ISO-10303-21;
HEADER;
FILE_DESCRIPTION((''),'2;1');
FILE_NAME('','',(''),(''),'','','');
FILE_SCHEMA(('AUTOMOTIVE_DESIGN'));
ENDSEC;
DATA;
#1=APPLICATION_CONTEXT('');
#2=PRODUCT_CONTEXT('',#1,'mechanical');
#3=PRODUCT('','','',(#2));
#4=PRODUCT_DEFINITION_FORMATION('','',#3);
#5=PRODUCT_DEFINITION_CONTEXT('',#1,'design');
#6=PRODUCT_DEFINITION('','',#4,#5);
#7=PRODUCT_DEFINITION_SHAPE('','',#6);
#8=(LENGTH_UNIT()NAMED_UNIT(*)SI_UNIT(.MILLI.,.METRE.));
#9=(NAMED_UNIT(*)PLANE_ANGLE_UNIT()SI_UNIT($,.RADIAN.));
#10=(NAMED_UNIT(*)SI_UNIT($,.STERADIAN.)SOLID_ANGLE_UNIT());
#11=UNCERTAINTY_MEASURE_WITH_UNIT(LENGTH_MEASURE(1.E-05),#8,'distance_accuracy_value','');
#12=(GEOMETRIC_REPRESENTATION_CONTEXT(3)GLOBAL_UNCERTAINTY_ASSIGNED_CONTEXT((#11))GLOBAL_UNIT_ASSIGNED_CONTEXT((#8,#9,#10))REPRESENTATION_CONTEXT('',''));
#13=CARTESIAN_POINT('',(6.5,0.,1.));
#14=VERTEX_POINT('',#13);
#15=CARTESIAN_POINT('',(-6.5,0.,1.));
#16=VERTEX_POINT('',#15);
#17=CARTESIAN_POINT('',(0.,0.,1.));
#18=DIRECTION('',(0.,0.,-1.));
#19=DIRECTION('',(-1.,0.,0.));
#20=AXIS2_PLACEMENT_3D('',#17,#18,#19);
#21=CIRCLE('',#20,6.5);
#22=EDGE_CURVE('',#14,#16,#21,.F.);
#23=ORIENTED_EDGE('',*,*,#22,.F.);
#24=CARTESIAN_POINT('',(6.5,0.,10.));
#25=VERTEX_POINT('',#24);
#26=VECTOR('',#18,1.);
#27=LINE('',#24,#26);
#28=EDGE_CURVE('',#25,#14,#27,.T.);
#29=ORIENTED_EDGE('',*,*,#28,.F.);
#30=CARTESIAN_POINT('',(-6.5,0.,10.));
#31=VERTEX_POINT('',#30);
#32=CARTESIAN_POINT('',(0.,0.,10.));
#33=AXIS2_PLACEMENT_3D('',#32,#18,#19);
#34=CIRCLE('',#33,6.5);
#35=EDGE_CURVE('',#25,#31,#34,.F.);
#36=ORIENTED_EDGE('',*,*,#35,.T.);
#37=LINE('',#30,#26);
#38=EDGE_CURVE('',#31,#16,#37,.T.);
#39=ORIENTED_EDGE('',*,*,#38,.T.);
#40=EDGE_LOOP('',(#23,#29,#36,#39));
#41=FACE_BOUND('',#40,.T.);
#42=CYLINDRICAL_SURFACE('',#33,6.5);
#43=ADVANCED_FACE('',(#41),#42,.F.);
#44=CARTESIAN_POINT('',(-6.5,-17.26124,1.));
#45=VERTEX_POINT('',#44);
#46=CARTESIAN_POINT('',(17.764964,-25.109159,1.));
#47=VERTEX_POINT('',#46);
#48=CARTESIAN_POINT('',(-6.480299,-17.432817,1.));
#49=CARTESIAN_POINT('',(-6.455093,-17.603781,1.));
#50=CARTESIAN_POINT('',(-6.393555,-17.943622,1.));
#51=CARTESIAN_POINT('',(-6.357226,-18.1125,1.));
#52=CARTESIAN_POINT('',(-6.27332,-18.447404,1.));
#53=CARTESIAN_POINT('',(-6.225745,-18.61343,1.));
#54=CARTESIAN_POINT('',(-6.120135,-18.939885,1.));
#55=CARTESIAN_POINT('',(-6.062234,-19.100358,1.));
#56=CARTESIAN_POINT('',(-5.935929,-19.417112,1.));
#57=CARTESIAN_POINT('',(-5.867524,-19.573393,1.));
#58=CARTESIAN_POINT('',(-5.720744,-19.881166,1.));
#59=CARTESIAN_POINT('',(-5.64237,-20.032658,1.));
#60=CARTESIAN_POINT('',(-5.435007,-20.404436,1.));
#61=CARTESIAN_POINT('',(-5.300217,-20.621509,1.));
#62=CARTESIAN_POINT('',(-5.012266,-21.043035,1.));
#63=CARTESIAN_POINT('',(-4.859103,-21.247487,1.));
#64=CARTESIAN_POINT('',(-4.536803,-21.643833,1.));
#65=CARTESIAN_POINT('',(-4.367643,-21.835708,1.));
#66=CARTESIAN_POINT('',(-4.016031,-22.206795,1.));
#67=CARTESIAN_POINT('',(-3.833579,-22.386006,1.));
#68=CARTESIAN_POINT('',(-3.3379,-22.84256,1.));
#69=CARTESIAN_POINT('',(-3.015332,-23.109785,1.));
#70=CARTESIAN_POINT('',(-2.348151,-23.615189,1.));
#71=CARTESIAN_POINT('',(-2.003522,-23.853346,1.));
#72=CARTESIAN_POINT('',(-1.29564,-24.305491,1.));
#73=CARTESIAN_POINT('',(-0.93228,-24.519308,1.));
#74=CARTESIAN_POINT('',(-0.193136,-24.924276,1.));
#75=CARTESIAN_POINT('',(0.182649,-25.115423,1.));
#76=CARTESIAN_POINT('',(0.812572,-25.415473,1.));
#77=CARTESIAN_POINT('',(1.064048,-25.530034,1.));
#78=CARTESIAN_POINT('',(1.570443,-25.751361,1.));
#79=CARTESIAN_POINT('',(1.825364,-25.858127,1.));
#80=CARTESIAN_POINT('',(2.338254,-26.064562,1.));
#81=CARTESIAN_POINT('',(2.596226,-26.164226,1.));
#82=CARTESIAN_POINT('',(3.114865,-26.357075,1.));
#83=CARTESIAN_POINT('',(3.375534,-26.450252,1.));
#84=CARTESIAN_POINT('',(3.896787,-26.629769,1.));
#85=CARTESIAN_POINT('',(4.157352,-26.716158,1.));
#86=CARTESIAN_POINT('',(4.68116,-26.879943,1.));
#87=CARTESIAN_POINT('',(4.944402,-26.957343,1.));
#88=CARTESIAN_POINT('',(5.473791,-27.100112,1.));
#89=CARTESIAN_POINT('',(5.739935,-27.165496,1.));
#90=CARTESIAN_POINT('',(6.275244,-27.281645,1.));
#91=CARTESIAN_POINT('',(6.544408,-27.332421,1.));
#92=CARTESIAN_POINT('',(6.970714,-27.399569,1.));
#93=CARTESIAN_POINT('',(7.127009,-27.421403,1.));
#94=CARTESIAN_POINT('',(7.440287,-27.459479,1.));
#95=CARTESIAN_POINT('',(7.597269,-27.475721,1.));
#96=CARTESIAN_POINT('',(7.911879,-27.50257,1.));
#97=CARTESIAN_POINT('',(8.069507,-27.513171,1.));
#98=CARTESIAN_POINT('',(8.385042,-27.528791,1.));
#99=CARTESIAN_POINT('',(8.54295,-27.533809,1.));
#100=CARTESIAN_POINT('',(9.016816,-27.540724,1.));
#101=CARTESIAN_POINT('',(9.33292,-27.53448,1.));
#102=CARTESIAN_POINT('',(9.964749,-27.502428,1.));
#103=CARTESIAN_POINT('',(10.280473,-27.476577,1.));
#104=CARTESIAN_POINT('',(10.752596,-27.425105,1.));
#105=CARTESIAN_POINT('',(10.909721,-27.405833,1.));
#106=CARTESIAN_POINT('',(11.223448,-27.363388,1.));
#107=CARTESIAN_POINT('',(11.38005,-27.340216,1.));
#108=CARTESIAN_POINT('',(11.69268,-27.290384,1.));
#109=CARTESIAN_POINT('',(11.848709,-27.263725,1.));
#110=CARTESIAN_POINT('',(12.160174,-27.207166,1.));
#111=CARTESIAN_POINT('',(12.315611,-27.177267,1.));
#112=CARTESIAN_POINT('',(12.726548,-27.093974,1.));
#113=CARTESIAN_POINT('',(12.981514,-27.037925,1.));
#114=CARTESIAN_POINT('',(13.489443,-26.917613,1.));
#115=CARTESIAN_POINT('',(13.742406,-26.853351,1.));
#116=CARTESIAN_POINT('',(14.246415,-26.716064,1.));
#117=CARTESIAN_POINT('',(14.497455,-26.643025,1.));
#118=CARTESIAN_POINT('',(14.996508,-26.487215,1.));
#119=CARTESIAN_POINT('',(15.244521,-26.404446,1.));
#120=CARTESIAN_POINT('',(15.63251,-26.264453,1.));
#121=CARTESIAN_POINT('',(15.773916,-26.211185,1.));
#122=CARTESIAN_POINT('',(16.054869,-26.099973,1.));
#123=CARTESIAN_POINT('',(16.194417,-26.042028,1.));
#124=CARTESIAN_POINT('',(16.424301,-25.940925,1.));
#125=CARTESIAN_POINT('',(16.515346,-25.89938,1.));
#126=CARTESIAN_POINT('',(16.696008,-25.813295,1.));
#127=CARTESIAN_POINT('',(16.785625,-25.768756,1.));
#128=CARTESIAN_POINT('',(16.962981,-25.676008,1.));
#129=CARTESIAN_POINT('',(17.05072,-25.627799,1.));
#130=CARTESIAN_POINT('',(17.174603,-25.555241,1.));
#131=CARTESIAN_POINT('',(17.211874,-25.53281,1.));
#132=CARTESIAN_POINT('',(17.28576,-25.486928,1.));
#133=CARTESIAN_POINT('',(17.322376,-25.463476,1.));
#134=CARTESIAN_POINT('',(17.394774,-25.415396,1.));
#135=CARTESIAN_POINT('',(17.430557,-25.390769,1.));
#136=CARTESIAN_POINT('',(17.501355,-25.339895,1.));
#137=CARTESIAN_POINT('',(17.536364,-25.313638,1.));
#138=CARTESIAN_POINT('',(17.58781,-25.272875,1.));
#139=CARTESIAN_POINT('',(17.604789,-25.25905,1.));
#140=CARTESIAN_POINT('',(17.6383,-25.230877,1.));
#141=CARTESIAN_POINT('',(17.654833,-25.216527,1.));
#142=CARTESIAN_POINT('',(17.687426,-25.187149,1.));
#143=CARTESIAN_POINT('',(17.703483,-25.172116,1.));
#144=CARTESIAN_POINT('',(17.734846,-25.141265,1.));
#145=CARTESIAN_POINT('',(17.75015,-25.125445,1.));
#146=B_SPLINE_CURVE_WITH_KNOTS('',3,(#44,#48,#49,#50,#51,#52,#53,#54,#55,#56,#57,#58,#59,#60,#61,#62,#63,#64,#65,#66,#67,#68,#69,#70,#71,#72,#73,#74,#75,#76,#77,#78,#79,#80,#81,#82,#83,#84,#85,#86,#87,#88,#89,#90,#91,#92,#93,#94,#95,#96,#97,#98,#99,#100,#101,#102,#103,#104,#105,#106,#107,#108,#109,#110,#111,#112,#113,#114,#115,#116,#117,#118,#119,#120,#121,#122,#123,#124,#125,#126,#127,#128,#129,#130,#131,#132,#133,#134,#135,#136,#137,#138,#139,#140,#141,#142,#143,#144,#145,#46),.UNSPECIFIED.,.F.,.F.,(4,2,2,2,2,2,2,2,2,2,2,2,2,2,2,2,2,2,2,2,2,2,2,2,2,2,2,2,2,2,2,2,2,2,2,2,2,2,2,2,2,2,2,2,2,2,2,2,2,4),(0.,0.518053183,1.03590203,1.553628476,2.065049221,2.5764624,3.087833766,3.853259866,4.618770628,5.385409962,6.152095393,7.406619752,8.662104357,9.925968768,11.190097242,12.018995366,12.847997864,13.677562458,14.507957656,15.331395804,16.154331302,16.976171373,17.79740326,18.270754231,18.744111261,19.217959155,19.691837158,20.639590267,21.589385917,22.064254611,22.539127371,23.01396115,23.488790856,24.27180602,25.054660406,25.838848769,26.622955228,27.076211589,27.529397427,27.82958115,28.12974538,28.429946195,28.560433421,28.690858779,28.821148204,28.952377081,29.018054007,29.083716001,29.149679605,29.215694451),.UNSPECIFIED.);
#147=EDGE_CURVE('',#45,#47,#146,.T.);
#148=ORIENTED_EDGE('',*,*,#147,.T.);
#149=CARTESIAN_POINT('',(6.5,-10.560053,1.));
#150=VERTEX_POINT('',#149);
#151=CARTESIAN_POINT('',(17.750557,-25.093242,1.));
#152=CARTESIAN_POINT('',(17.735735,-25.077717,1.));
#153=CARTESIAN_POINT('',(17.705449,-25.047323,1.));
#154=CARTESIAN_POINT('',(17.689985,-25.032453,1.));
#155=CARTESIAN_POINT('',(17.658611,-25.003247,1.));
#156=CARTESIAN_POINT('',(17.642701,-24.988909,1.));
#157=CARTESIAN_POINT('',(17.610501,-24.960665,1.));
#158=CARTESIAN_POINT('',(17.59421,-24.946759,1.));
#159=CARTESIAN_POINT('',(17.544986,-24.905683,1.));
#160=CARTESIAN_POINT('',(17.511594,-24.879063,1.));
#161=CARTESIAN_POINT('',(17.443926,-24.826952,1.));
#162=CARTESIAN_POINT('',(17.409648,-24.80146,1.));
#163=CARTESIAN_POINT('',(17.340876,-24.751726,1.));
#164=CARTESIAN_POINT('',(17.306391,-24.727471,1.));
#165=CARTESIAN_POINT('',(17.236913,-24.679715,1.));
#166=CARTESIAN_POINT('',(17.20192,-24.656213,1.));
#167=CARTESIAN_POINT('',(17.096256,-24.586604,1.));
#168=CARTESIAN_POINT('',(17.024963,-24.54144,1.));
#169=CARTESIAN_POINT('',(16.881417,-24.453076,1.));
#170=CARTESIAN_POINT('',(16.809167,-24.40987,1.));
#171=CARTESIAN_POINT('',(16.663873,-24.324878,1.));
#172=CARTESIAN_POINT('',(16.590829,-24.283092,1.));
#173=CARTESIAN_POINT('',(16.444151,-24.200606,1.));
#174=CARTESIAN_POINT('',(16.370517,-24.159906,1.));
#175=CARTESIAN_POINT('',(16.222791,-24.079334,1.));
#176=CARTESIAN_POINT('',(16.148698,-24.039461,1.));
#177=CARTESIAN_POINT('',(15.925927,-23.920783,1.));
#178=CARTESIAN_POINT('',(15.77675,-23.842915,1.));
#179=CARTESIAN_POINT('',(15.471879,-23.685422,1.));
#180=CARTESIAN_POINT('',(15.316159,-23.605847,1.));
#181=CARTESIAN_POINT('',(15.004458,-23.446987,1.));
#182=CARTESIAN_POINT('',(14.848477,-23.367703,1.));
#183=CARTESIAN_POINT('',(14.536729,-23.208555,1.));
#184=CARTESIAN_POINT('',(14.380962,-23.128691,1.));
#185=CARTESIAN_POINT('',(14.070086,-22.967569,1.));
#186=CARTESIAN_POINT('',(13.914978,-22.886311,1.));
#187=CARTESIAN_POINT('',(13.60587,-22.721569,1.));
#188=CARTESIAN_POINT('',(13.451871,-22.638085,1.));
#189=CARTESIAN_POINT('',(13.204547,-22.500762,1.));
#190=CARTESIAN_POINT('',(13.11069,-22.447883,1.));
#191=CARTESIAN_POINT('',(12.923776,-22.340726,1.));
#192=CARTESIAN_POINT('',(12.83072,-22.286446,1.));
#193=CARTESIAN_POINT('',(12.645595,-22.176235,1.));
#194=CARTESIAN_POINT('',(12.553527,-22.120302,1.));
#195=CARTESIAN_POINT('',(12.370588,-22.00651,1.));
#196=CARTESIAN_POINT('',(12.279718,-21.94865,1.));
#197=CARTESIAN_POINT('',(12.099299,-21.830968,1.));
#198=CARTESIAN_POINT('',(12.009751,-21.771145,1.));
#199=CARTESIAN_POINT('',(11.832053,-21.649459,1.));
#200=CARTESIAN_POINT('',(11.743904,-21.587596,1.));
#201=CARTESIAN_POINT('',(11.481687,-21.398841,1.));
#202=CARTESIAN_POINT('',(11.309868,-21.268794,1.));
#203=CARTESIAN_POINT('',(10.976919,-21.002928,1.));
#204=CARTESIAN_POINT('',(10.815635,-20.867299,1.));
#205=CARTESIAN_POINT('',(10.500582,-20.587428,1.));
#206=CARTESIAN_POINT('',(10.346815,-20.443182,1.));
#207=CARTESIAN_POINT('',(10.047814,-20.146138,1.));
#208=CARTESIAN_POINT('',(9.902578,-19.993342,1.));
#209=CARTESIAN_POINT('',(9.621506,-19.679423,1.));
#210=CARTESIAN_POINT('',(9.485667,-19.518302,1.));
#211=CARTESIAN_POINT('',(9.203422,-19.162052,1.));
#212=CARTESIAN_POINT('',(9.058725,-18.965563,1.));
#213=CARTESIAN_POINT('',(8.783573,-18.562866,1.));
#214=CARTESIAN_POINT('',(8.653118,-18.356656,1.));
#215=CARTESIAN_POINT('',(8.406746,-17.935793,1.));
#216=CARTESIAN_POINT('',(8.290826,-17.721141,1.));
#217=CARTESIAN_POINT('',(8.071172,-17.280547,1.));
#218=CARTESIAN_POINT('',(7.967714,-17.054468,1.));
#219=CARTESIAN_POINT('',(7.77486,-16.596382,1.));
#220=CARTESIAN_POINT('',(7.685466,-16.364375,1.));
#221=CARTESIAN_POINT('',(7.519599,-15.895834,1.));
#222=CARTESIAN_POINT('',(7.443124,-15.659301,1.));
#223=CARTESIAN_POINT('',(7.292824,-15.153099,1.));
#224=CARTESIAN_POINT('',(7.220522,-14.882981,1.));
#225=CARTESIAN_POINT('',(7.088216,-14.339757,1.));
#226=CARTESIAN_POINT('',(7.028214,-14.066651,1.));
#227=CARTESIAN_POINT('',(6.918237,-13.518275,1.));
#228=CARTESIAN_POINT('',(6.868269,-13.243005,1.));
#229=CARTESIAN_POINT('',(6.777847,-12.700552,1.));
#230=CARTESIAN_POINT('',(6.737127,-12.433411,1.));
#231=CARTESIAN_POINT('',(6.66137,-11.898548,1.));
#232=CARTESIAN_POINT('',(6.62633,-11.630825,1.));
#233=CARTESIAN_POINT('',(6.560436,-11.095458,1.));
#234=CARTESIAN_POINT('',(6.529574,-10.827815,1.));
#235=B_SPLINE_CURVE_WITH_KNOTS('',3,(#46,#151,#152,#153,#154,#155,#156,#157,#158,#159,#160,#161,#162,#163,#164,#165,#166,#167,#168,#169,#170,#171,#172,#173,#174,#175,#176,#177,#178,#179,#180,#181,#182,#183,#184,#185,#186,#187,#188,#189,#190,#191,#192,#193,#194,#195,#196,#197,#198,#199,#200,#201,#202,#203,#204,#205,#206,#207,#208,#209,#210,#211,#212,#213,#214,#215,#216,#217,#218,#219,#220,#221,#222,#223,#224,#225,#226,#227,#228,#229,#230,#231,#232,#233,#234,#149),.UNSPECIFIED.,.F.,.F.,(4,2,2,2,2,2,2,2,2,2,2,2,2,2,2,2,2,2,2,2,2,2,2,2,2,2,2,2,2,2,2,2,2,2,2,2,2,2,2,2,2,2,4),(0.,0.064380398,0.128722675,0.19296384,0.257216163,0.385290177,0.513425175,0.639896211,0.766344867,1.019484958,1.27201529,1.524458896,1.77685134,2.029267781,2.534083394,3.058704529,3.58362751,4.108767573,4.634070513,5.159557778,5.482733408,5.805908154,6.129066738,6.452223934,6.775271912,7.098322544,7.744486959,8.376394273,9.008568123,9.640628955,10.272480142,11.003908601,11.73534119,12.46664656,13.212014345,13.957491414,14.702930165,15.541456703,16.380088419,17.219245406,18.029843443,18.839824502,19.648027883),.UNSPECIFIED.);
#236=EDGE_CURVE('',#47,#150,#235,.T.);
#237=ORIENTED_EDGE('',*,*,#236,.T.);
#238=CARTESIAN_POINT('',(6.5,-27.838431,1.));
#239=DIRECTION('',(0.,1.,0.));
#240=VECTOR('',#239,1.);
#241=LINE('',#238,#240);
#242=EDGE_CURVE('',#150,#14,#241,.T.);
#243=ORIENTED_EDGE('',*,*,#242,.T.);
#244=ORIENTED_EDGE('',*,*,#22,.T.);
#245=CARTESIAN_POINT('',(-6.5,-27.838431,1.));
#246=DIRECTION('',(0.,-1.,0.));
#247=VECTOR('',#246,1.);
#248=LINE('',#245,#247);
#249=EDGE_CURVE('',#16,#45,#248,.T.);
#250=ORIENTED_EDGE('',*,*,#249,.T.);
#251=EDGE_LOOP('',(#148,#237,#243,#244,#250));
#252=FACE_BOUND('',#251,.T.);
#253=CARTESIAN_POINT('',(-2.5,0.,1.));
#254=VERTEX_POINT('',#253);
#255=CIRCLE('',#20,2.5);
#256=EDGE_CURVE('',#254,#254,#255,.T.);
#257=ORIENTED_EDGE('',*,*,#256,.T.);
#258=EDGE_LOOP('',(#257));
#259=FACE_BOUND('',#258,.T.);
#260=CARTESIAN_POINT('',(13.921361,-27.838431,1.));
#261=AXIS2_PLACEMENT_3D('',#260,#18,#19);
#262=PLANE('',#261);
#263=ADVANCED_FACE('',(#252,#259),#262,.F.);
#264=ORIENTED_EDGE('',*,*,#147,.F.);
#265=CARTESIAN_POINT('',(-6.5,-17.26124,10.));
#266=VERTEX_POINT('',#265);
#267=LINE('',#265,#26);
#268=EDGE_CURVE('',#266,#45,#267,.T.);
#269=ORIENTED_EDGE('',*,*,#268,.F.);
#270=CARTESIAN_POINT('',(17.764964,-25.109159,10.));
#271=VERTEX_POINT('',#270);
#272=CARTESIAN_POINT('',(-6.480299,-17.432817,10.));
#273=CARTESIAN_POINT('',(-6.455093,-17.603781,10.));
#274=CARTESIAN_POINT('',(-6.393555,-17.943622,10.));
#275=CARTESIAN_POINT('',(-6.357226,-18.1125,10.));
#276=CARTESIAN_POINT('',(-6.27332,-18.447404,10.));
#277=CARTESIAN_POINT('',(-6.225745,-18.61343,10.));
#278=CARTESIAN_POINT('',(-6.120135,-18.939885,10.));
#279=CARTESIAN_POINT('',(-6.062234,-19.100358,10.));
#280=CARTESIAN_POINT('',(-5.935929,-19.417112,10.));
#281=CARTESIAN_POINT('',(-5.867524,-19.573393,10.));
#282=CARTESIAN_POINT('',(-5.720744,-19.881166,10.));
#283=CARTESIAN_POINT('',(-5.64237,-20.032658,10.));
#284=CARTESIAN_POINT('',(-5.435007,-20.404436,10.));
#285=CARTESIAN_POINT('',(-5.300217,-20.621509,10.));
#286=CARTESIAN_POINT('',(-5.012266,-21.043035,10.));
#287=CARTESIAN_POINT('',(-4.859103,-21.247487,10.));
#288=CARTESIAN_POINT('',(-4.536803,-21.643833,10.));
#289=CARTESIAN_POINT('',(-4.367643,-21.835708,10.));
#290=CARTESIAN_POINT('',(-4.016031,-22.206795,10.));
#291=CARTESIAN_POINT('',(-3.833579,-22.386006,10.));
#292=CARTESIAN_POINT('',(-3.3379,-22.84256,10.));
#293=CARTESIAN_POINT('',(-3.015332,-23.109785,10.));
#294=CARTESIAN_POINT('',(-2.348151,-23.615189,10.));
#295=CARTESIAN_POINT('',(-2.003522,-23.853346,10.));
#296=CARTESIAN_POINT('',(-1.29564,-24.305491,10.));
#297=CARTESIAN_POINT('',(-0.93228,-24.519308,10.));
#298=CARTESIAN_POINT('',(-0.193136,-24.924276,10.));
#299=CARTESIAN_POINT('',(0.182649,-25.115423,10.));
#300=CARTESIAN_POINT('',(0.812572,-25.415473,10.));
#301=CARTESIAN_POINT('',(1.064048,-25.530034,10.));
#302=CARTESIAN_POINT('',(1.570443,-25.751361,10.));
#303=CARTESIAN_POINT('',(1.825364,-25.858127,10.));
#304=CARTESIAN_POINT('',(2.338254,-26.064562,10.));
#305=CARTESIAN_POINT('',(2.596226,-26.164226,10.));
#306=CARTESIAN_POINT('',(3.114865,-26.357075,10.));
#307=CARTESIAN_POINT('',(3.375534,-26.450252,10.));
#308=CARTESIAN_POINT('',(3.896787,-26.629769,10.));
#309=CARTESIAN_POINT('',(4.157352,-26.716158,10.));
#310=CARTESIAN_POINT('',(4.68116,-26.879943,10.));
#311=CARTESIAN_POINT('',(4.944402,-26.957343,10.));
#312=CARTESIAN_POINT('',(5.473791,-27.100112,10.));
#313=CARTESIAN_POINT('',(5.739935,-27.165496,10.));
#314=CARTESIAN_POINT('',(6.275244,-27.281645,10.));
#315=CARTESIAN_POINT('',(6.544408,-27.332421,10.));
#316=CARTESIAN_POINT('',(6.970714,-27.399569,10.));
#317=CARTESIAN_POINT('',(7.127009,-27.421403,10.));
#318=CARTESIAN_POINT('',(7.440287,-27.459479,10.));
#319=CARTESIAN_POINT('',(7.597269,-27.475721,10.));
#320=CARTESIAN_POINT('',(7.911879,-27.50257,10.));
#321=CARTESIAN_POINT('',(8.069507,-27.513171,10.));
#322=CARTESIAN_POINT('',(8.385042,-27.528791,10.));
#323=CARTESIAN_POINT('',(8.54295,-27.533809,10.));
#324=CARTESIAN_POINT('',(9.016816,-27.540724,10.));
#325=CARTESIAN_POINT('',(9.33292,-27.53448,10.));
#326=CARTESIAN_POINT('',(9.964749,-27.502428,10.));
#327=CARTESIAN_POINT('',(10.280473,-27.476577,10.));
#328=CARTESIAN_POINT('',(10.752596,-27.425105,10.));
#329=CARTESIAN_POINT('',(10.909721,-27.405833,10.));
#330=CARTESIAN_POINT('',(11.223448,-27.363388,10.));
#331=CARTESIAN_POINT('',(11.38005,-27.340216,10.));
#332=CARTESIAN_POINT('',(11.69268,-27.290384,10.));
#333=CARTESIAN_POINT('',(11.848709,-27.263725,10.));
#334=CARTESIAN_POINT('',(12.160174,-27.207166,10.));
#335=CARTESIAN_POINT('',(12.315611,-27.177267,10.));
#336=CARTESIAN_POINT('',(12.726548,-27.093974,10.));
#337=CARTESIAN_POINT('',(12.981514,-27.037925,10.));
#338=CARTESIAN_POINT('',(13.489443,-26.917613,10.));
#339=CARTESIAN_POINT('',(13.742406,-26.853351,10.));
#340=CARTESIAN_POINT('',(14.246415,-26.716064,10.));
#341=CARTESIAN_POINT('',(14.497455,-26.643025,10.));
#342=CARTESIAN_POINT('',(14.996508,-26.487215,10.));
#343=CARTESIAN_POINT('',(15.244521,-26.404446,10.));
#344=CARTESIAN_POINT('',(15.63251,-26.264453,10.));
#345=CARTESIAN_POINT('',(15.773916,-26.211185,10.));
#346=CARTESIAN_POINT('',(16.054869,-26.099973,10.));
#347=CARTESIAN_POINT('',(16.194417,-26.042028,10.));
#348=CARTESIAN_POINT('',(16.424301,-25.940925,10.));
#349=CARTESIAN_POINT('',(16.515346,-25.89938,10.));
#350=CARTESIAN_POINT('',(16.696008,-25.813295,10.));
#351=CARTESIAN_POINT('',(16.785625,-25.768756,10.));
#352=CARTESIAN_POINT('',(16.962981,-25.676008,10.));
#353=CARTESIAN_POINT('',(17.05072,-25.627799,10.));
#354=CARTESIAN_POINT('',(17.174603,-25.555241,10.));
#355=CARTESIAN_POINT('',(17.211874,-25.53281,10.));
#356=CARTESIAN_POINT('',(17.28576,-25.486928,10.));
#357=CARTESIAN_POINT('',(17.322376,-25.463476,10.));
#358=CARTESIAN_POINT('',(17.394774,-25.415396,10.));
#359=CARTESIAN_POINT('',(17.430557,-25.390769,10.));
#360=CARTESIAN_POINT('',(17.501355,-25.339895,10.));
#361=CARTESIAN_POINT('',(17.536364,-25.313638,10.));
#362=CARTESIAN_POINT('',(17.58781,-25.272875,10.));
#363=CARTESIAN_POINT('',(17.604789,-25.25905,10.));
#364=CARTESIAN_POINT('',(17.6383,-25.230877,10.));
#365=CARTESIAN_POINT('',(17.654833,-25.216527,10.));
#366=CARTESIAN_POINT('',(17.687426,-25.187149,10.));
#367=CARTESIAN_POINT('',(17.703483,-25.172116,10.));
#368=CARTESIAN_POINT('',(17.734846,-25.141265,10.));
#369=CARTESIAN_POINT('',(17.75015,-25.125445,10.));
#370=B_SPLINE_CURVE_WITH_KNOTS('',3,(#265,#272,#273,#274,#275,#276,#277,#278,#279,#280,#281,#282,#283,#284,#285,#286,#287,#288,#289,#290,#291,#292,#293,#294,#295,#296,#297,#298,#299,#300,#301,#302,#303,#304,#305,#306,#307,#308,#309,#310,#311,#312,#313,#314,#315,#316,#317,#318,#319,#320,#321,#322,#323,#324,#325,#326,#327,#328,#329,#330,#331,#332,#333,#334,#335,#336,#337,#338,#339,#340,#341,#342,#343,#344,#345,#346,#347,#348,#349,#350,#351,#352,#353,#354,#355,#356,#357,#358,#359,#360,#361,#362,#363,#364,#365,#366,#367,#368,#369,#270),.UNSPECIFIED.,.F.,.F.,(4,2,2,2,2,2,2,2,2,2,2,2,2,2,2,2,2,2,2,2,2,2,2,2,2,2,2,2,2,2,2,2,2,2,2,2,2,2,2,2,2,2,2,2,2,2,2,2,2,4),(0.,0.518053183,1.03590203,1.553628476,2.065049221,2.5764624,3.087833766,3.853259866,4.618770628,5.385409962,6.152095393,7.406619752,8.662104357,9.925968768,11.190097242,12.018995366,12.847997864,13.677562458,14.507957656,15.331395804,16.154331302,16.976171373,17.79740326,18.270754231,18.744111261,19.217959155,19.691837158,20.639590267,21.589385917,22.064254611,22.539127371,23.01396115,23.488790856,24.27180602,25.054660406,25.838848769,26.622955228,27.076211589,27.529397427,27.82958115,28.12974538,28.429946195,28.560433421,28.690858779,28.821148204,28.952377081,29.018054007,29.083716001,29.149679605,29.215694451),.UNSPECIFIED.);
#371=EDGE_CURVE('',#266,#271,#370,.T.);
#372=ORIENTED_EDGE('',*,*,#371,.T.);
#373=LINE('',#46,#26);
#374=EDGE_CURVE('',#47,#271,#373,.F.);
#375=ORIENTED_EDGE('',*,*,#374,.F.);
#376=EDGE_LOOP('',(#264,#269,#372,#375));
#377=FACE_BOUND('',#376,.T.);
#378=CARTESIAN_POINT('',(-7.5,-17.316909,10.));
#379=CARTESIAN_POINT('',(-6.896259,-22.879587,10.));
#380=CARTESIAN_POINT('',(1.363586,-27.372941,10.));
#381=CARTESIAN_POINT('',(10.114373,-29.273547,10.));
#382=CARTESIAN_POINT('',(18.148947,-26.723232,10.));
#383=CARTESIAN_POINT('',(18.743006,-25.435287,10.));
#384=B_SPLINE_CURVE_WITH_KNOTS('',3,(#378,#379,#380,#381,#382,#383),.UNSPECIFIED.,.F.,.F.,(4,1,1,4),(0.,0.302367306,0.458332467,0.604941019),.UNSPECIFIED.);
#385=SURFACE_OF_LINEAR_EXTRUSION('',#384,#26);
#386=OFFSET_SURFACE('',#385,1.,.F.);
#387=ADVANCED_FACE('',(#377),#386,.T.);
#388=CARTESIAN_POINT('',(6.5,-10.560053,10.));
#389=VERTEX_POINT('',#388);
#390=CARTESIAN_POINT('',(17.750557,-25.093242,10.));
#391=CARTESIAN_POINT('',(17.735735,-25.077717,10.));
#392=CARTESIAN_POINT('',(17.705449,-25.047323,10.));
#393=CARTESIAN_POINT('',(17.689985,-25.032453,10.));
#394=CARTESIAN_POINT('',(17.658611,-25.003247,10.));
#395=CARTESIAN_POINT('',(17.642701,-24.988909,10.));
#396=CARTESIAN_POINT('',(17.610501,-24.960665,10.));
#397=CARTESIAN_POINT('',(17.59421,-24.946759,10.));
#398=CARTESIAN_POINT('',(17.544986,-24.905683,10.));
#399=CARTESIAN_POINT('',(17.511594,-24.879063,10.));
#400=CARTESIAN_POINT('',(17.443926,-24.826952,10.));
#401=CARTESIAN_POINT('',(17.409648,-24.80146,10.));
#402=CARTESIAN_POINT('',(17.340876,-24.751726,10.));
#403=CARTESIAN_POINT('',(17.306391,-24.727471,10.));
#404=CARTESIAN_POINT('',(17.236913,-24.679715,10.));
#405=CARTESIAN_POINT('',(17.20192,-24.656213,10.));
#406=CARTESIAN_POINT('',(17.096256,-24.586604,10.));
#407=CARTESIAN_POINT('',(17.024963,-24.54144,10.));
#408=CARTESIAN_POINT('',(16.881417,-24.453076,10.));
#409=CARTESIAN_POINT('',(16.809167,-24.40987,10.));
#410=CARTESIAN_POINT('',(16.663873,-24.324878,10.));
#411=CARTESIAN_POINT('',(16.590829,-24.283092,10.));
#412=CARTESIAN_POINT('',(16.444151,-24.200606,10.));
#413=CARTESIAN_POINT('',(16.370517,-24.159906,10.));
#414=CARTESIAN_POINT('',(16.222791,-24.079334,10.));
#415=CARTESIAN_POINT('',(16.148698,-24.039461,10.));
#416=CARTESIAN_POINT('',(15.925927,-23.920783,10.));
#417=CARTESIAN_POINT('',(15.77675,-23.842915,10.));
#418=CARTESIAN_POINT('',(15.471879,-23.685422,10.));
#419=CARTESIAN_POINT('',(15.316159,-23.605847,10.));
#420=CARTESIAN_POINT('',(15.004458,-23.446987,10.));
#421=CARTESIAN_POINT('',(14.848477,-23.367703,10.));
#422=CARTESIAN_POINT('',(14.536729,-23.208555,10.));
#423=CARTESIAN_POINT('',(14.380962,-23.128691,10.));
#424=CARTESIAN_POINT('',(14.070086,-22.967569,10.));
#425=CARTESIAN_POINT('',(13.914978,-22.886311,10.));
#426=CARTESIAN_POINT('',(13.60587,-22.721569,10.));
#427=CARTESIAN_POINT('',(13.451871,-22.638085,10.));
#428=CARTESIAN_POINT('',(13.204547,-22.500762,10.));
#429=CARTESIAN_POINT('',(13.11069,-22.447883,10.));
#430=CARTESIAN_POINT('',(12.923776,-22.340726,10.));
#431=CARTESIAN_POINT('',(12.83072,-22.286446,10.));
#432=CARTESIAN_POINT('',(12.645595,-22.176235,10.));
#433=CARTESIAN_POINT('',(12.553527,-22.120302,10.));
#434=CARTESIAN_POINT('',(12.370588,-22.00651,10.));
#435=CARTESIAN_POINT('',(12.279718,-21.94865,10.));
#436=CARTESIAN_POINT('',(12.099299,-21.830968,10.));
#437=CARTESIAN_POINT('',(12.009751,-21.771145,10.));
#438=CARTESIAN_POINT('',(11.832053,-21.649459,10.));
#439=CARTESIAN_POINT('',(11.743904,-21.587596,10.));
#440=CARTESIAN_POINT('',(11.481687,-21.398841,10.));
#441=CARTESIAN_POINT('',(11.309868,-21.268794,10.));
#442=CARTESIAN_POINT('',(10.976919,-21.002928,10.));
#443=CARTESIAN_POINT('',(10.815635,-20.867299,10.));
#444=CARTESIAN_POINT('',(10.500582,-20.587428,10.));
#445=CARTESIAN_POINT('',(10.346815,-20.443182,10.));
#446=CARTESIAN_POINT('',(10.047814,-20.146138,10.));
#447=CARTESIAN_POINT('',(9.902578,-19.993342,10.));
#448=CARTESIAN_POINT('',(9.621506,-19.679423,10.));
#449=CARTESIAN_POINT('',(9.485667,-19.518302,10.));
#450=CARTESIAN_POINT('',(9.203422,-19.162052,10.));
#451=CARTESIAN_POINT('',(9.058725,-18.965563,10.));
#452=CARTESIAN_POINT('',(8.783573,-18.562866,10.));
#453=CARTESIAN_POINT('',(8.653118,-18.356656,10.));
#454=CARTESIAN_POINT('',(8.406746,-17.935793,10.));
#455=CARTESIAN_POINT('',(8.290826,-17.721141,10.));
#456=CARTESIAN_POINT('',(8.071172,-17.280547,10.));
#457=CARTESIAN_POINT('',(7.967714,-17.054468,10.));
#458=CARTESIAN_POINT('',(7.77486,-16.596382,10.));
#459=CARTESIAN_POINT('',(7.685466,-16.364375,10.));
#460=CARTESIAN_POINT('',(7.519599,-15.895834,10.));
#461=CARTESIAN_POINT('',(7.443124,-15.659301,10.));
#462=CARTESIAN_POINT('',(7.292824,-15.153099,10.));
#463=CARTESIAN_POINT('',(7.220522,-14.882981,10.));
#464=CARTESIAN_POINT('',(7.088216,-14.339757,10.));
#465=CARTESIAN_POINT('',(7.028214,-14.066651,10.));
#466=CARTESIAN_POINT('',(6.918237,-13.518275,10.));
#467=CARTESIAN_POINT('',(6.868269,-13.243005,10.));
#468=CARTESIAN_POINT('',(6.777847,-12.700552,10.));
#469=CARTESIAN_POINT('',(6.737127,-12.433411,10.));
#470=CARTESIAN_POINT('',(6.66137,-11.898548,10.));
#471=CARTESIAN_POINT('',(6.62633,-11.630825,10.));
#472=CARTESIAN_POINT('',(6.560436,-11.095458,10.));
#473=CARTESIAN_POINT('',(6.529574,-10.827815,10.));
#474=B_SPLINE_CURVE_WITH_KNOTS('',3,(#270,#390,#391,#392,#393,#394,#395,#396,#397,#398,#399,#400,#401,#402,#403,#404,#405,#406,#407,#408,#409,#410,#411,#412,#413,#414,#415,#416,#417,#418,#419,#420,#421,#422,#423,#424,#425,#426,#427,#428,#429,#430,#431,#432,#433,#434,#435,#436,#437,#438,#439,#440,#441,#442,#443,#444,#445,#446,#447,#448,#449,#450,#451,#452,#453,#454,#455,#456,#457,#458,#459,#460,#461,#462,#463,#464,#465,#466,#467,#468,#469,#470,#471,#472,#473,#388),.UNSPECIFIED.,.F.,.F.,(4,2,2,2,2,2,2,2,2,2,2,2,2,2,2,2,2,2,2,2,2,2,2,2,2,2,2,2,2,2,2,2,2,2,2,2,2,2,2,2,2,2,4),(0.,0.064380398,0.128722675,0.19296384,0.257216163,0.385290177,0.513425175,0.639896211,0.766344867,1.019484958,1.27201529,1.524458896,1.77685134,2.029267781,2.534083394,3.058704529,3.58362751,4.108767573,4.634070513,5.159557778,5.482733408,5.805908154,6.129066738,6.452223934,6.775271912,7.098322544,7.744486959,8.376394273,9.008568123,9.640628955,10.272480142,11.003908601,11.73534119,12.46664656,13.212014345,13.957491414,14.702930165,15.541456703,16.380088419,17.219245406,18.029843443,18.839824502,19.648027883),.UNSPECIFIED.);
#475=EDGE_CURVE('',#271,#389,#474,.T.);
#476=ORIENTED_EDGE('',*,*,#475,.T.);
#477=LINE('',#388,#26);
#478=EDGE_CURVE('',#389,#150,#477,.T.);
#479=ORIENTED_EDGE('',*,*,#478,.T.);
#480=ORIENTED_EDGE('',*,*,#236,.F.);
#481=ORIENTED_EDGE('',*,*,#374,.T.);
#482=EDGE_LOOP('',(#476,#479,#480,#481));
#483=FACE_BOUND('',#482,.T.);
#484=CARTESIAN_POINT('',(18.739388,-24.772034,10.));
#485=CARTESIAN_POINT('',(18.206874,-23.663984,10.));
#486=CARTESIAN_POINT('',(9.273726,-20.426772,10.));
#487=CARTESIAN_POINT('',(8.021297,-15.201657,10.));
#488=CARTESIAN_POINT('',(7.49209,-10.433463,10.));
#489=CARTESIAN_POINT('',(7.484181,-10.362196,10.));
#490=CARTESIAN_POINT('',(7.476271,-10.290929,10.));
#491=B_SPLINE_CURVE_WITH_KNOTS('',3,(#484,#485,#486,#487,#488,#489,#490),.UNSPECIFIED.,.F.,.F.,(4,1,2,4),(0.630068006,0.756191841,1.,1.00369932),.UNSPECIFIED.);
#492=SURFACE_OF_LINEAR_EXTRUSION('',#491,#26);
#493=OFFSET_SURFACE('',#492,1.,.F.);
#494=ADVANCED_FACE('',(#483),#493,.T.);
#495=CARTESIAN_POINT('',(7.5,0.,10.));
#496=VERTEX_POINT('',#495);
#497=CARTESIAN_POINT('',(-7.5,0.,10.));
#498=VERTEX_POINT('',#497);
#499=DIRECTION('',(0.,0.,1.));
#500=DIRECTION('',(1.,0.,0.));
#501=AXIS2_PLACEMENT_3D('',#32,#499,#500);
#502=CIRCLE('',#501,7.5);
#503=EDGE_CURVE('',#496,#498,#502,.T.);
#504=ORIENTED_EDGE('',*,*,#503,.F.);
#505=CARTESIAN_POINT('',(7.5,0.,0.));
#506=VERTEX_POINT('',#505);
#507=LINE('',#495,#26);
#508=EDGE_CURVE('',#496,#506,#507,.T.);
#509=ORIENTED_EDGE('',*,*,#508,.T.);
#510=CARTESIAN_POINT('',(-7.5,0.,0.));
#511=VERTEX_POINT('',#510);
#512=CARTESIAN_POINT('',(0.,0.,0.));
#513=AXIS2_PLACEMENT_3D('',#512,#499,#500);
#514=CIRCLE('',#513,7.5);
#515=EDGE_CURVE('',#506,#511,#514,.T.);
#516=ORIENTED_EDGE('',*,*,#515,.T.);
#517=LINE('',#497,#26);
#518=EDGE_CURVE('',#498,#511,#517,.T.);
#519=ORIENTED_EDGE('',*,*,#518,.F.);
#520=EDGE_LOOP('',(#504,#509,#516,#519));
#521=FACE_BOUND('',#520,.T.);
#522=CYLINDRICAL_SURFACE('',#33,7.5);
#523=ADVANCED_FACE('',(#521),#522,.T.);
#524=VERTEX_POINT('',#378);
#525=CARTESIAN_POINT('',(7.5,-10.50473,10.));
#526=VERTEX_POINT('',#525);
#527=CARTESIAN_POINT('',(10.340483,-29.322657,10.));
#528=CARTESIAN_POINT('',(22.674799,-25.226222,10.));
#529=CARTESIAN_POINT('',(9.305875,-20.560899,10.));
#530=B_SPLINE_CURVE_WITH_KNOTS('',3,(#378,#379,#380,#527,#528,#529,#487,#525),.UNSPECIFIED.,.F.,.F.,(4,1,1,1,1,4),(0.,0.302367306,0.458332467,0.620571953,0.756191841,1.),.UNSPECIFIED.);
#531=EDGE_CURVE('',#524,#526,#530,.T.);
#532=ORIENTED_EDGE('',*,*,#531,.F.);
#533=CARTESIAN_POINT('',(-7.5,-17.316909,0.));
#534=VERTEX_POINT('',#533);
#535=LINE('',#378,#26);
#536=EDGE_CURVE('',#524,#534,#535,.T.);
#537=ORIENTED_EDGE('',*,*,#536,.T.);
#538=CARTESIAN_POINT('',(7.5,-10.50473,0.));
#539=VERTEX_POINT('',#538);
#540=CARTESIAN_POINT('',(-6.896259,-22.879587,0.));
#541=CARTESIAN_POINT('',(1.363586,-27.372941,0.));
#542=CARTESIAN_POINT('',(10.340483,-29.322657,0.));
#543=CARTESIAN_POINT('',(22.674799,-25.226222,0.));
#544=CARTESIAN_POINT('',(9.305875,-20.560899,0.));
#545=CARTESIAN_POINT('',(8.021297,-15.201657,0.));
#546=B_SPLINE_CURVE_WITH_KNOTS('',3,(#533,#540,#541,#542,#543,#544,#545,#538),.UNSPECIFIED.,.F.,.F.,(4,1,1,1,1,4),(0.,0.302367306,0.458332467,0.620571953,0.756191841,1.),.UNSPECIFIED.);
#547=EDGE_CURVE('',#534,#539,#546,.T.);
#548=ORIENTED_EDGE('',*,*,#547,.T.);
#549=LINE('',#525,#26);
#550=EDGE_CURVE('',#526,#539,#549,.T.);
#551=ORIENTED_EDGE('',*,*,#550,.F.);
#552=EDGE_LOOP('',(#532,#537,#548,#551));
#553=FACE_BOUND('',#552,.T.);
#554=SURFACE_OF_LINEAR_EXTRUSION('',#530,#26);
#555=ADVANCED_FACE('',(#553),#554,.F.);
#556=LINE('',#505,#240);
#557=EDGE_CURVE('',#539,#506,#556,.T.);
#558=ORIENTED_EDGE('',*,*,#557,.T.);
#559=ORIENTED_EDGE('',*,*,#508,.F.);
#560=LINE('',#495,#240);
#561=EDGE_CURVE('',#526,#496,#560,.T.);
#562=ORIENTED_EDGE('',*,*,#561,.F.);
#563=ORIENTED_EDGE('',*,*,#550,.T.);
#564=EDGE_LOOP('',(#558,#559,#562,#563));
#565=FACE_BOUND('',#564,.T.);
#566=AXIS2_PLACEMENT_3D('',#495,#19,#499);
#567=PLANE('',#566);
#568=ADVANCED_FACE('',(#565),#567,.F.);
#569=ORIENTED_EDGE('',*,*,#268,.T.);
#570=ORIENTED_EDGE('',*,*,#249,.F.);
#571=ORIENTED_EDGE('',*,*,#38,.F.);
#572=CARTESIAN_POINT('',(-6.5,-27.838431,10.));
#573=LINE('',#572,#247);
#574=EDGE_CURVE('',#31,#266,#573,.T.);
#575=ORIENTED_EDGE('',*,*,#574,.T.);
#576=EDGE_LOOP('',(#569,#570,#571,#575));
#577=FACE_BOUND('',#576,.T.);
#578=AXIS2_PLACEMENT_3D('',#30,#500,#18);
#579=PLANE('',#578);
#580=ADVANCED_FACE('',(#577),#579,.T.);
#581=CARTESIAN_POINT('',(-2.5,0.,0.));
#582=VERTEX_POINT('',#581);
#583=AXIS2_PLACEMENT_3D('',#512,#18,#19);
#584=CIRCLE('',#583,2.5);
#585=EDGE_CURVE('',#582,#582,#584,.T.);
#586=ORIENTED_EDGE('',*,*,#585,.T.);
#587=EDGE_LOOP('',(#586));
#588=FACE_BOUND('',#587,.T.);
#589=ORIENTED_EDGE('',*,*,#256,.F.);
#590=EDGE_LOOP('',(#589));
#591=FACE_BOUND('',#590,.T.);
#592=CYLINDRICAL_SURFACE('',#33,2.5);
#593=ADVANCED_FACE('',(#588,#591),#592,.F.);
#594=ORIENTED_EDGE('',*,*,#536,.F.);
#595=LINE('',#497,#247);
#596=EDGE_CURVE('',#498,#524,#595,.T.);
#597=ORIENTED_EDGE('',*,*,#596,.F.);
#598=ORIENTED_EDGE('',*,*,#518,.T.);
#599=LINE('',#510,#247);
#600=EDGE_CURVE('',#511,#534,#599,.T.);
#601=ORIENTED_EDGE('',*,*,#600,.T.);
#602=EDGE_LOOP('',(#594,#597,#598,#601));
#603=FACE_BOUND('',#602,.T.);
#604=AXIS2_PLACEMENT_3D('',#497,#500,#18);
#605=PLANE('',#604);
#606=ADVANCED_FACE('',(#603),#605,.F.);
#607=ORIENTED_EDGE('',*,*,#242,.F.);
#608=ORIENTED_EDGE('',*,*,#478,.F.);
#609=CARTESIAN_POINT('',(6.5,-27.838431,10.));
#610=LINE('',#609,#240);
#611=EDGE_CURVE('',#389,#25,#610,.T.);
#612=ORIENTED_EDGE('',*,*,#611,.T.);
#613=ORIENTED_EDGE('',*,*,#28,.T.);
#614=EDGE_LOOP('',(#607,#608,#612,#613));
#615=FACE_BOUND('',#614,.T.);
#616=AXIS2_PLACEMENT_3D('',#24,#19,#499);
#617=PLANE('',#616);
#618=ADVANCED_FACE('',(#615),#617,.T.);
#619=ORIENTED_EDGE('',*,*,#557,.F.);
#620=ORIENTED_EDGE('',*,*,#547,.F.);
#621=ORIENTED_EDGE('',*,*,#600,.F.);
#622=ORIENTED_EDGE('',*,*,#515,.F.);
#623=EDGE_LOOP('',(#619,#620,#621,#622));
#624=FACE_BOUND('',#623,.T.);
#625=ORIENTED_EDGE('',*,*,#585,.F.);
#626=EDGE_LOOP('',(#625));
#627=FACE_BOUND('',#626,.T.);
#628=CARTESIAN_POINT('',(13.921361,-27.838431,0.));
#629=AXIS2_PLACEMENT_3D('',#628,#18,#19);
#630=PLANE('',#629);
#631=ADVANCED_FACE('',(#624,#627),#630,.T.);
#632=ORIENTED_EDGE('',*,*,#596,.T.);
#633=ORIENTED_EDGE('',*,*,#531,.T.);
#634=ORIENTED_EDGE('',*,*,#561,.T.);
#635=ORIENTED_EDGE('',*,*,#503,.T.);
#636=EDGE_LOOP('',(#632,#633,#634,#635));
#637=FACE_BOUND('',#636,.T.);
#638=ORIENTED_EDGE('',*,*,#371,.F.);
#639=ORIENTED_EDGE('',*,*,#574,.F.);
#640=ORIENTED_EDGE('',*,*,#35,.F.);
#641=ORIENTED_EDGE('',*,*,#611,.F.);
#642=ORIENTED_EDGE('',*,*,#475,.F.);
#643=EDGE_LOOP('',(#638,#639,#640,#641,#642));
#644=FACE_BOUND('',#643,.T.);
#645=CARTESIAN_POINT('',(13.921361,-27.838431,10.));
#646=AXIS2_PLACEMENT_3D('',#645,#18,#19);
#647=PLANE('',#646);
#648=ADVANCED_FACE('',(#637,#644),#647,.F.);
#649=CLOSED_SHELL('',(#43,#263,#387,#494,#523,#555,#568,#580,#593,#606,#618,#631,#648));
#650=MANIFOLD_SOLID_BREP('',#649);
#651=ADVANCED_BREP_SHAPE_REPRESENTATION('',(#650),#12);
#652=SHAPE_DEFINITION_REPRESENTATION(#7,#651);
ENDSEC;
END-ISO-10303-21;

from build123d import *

# Parameters (mm, degrees)
EXTRUDE_1_DEPTH     = 10
SHELL_START         = 1
SHELL_1_DEPTH       = 9
SKETCH_2_R          = 2.5
CUT_EXTRUDE_1_DEPTH = 10


# Read off the part's stored shape, not the designer's step: 抽壳1
with BuildPart() as part:
    # 草图1 → 凸台-拉伸1 (new body)
    with BuildSketch(Plane.XY):
        with BuildLine():
            Line((7.5, 0), (7.5, -10.504729681))
            add(Edge.make_bspline(
                [(7.5, -10.504729681), (8.021297076, -15.201657173), (9.305875164, -20.560899138), (22.674798815, -25.226221765), (10.340482522, -29.322656715), (1.363586224, -27.372940981), (-6.896258848, -22.879586958), (-7.5, -17.316908959)],
                knots=[0, 0, 0, 0, 0.243808159, 0.379428047, 0.541667533, 0.697632694, 1, 1, 1, 1], degree=3))
            Line((-7.5, -17.316908959), (-7.5, 0))
            ThreePointArc((-7.5, 0), (0, 7.5), (7.5, 0))
        make_face()
    extrude(amount=EXTRUDE_1_DEPTH)

    # 抽壳1 outline → 抽壳1 (cut)
    with BuildSketch(Plane.XY.offset(SHELL_START)):
        with BuildLine():
            add(Edge.make_bspline(
                [(-6.500000009, -17.261239946), (-6.439521574, -17.787014962), (-6.344378656, -18.291379533), (-6.216503917, -18.775790534), (-6.057602845, -19.241769619), (-5.869061295, -19.690801085), (-5.652006063, -20.124169377), (-5.407432213, -20.542850953), (-5.136335902, -20.947498631), (-4.839814395, -21.338503833), (-4.519115679, -21.716093294), (-4.175638775, -22.080411869), (-3.810902274, -22.431561965), (-3.426513038, -22.769612908), (-2.821587443, -23.258334971), (-2.614444932, -23.418712944), (-2.402969473, -23.575804398), (-2.187383641, -23.729621088), (-1.967914267, -23.880176358), (-1.744791966, -24.027485226), (-1.518250665, -24.171564464), (-1.288527132, -24.312432689), (-1.055860502, -24.45011044), (-0.820491812, -24.58462027), (-0.582663519, -24.715986822), (-0.342619037, -24.844236919), (-0.100602262, -24.969399649), (0.265015483, -25.15255984), (0.387320101, -25.212849094), (0.51002612, -25.272378081), (0.633102897, -25.331150773), (0.75651978, -25.389171243), (0.880246108, -25.446443655), (1.004251211, -25.502972279), (1.128504412, -25.558761473), (1.252975025, -25.6138157), (1.377632354, -25.668139515), (1.502445697, -25.721737575), (1.627384342, -25.77461463), (1.752417569, -25.82677553), (2.002611728, -25.929674913), (2.127766911, -25.980411342), (2.253011575, -26.030461002), (2.377987526, -26.079714974), (2.503785661, -26.128568389), (2.627609853, -26.176064588), (2.754597489, -26.224006146), (2.877193277, -26.26978137), (3.004027738, -26.316407793), (3.127146022, -26.361134901), (3.252267932, -26.405968006), (3.376088153, -26.449773736), (3.500008034, -26.493055613), (4.117650303, -26.706072948), (4.601908488, -26.864367649), (5.079104851, -27.009296305), (5.552184472, -27.13971904), (6.024207687, -27.254620307), (6.498435977, -27.353094421), (6.978393154, -27.434275307), (7.467842238, -27.497228795), (7.970681116, -27.540848515), (8.490798642, -27.563799937), (9.031947117, -27.564541002), (9.59767725, -27.541412388), (10.191347545, -27.492735577), (10.855212698, -27.41203554), (10.894383743, -27.40718205), (10.933688303, -27.402220592), (10.973082312, -27.397155371), (11.012647176, -27.391976573), (11.0523281, -27.386691379), (11.092084436, -27.381303738), (11.131987346, -27.375803413), (11.172081681, -27.370185191), (11.212286608, -27.364460752), (11.252556085, -27.358635862), (11.293007581, -27.352694085), (11.33354738, -27.346648992), (11.414860672, -27.334343842), (11.455629284, -27.328084455), (11.496506339, -27.321718833), (11.537488317, -27.31524755), (11.578571696, -27.308671184), (11.619752953, -27.301990307), (11.661028569, -27.295205501), (11.70239502, -27.288317335), (11.743848786, -27.281326391), (11.785386345, -27.274233239), (11.827004176, -27.267038459), (11.868698756, -27.259742626), (11.910466564, -27.252346315), (12.035979109, -27.229857676), (12.119933246, -27.214465791), (12.204138822, -27.198679195), (12.288568223, -27.182502683), (12.373193892, -27.165941094), (12.457988323, -27.148999312), (12.542924069, -27.131682271), (12.627973732, -27.113994941), (12.713109974, -27.095942349), (12.798305507, -27.077529558), (12.883533101, -27.058761682), (12.968765579, -27.039643878), (13.053975819, -27.020181349), (13.309458619, -26.960775334), (13.479583039, -26.919812934), (13.649292236, -26.87753502), (13.818368754, -26.83398472), (13.9865951, -26.789205733), (14.153753381, -26.743242655), (14.319624936, -26.696141279), (14.483989989, -26.64794894), (14.646627269, -26.598714807), (14.807313664, -26.548490225), (14.965823847, -26.497329013), (15.121929924, -26.445287801), (15.275401064, -26.392426333), (15.674695935, -26.250266234), (15.915555272, -26.159666588), (16.147585922, -26.067269509), (16.369520611, -25.973478269), (16.580528875, -25.878549667), (16.779216707, -25.782972605), (16.964351397, -25.687304088), (17.134803871, -25.592118409), (17.289098165, -25.498219034), (17.425639821, -25.406772075), (17.542980088, -25.319278816), (17.639315715, -25.237879944), (17.713179597, -25.166266037), (17.764963789, -25.109158429)],
                knots=[0.0010636, 0.0010636, 0.0010636, 0.0010636, 0.0010636, 0.0010636, 0.0010636, 0.0010636, 0.0010636, 0.0010636, 0.0010636, 0.0010636, 0.0010636, 0.0010636, 0.0010636, 0.151235255, 0.151235255, 0.151235255, 0.151235255, 0.151235255, 0.151235255, 0.151235255, 0.151235255, 0.151235255, 0.151235255, 0.151235255, 0.151235255, 0.151235255, 0.226852882, 0.226852882, 0.226852882, 0.226852882, 0.226852882, 0.226852882, 0.226852882, 0.226852882, 0.226852882, 0.226852882, 0.226852882, 0.226852882, 0.226852882, 0.264661696, 0.264661696, 0.264661696, 0.264661696, 0.264661696, 0.264661696, 0.264661696, 0.264661696, 0.264661696, 0.264661696, 0.264661696, 0.264661696, 0.264661696, 0.302470509, 0.302470509, 0.302470509, 0.302470509, 0.302470509, 0.302470509, 0.302470509, 0.302470509, 0.302470509, 0.302470509, 0.302470509, 0.302470509, 0.302470509, 0.453705764, 0.453705764, 0.453705764, 0.453705764, 0.453705764, 0.453705764, 0.453705764, 0.453705764, 0.453705764, 0.453705764, 0.453705764, 0.453705764, 0.453705764, 0.463157967, 0.463157967, 0.463157967, 0.463157967, 0.463157967, 0.463157967, 0.463157967, 0.463157967, 0.463157967, 0.463157967, 0.463157967, 0.463157967, 0.463157967, 0.472610171, 0.472610171, 0.472610171, 0.472610171, 0.472610171, 0.472610171, 0.472610171, 0.472610171, 0.472610171, 0.472610171, 0.472610171, 0.472610171, 0.472610171, 0.491514578, 0.491514578, 0.491514578, 0.491514578, 0.491514578, 0.491514578, 0.491514578, 0.491514578, 0.491514578, 0.491514578, 0.491514578, 0.491514578, 0.491514578, 0.529323391, 0.529323391, 0.529323391, 0.529323391, 0.529323391, 0.529323391, 0.529323391, 0.529323391, 0.529323391, 0.529323391, 0.529323391, 0.529323391, 0.529323391, 0.591757983, 0.591757983, 0.591757983, 0.591757983, 0.591757983, 0.591757983, 0.591757983, 0.591757983, 0.591757983, 0.591757983, 0.591757983, 0.591757983, 0.591757983, 0.591757983, 0.591757983], degree=14))
            add(Edge.make_bspline(
                [(17.764963789, -25.109158429), (17.69308935, -25.029546237), (17.581363239, -24.922665167), (17.430157138, -24.799876622), (17.245494319, -24.668295233), (17.031995847, -24.529465421), (16.792325971, -24.386016517), (16.532816172, -24.238523167), (16.25218172, -24.086787627), (15.958640238, -23.932704172), (15.6504144, -23.774561622), (15.333242725, -23.613761402), (15.008254158, -23.449482472), (14.678460819, -23.281831185), (14.250120026, -23.060967848), (14.153853927, -23.011130304), (14.057439385, -22.960979577), (13.960934377, -22.910509026), (13.864396297, -22.859711452), (13.76788195, -22.808579035), (13.671447549, -22.757103277), (13.57514871, -22.705274943), (13.479040446, -22.653083998), (13.383177159, -22.600519554), (13.287612644, -22.547569807), (13.192400075, -22.494221978), (13.097592004, -22.440462252), (12.979652446, -22.372729092), (12.956093088, -22.359155838), (12.93256308, -22.345555697), (12.90906322, -22.331928406), (12.885594307, -22.318273701), (12.862157136, -22.304591318), (12.838752507, -22.290880993), (12.815381217, -22.277142464), (12.792044063, -22.263375464), (12.768741842, -22.249579733), (12.745475354, -22.235755003), (12.722245394, -22.221901014), (12.699052761, -22.208017499), (12.664320998, -22.187147546), (12.65275327, -22.180183436), (12.641195165, -22.17321183), (12.62964678, -22.166232687), (12.618108213, -22.15924597), (12.60657956, -22.152251635), (12.59506092, -22.14524965), (12.583552387, -22.138239969), (12.572054063, -22.131222558), (12.560566041, -22.124197374), (12.54908842, -22.117164381), (12.537621297, -22.110123537), (12.526164769, -22.103074805), (12.503273098, -22.088961484), (12.491839529, -22.08189789), (12.480411702, -22.074823164), (12.4689959, -22.067741075), (12.457597404, -22.060654849), (12.446216952, -22.053564968), (12.434852342, -22.046470105), (12.423501428, -22.039368962), (12.412164066, -22.032261436), (12.400841956, -22.02514856), (12.389536629, -22.018031265), (12.378247207, -22.01090903), (12.366970879, -22.003780159), (12.310668589, -21.968110992), (12.26586852, -21.93948894), (12.221309566, -21.910779961), (12.176991082, -21.881983847), (12.13291242, -21.853100386), (12.089072934, -21.824129374), (12.045471975, -21.795070596), (12.0021089, -21.76592385), (11.958983059, -21.736688919), (11.916093806, -21.707365601), (11.873440494, -21.677953682), (11.831022477, -21.648452955), (11.788839108, -21.618863212), (11.579092265, -21.470468362), (11.415040184, -21.350326211), (11.254693781, -21.228745952), (11.098015265, -21.105717816), (10.944968475, -20.981234181), (10.795518593, -20.855289653), (10.649631854, -20.72788115), (10.507275262, -20.599007983), (10.368416295, -20.468671932), (10.233022621, -20.336877336), (10.101061809, -20.203631167), (9.972501036, -20.068943117), (9.847306806, -19.932825674), (9.481720349, -19.520231279), (9.25132434, -19.239511712), (9.033975364, -18.953249598), (8.829378566, -18.661601074), (8.637207543, -18.364752653), (8.457093915, -18.062908055), (8.288623211, -17.756274548), (8.131335844, -17.445049765), (7.984731973, -17.129410032), (7.848279021, -16.809501148), (7.721420655, -16.485432659), (7.603585989, -16.157276584), (7.494197819, -15.825071602), (7.341919075, -15.320714735), (7.293126813, -15.15158724), (7.246229307, -14.981452714), (7.201154126, -14.810310831), (7.157829039, -14.638159557), (7.116182085, -14.464995291), (7.076141641, -14.29081299), (7.037636491, -14.115606313), (7.00059589, -13.939367743), (6.964949637, -13.76208873), (6.930628141, -13.583759818), (6.89756249, -13.404370783), (6.86568452, -13.223910762), (6.819548058, -12.951597206), (6.804449279, -12.860555451), (6.789622099, -12.769241672), (6.775058117, -12.677654388), (6.760748967, -12.585792101), (6.746686324, -12.493653289), (6.7328619, -12.401236408), (6.719267448, -12.308539894), (6.705894756, -12.215562161), (6.692735655, -12.1223016), (6.67978201, -12.028756581), (6.667025727, -11.934925453), (6.654458752, -11.840806543), (6.635880223, -11.699193963), (6.629732678, -11.651917412), (6.623629439, -11.604568292), (6.617569515, -11.55714639), (6.611551915, -11.509651496), (6.605575648, -11.462083396), (6.599639721, -11.414441881), (6.593743144, -11.366726736), (6.587884925, -11.318937752), (6.582064073, -11.271074715), (6.576279596, -11.223137414), (6.570530503, -11.175125636), (6.564815803, -11.127039172), (6.556293855, -11.054797125), (6.55346156, -11.030697717), (6.550637498, -11.006579556), (6.547821547, -10.982442615), (6.545013585, -10.958286868), (6.542213489, -10.934112288), (6.539421139, -10.909918848), (6.536636412, -10.885706521), (6.533859187, -10.861475281), (6.531089341, -10.8372251), (6.528326752, -10.812955952), (6.525571299, -10.78866781), (6.52282286, -10.764360647), (6.519395925, -10.733952883), (6.518710969, -10.72787014), (6.518026442, -10.721786206), (6.517342342, -10.715701081), (6.516658667, -10.709614764), (6.515975415, -10.703527254), (6.515292585, -10.697438553), (6.514610174, -10.691348657), (6.513928181, -10.68525757), (6.513246603, -10.679165287), (6.512565439, -10.673071811), (6.511884687, -10.66697714), (6.511204345, -10.660881274), (6.510354427, -10.653259946), (6.510184469, -10.651735606), (6.510014537, -10.650211191), (6.50984463, -10.648686702), (6.509674748, -10.647162138), (6.509504892, -10.645637498), (6.509335061, -10.644112785), (6.509165255, -10.642587996), (6.508995475, -10.641063133), (6.50882572, -10.639538194), (6.508655991, -10.638013181), (6.508486286, -10.636488094), (6.508316607, -10.634962931), (6.508062125, -10.632675075), (6.507977305, -10.631912438), (6.50789249, -10.631149782), (6.507807682, -10.630387107), (6.50772288, -10.629624414), (6.507638084, -10.628861701), (6.507553295, -10.628098971), (6.507468512, -10.627336221), (6.507383735, -10.626573453), (6.507298964, -10.625810666), (6.5072142, -10.62504786), (6.507129441, -10.624285036), (6.50704469, -10.623522193), (6.506917571, -10.6223779), (6.5068752, -10.621996464), (6.50683283, -10.621615024), (6.506790462, -10.621233579), (6.506748095, -10.620852129), (6.506705731, -10.620470676), (6.506663367, -10.620089216), (6.506621005, -10.619707753), (6.506578645, -10.619326284), (6.506536286, -10.618944811), (6.506493929, -10.618563333), (6.506451573, -10.618181851), (6.506409219, -10.617800364), (6.506324514, -10.617037381), (6.50628245, -10.616658464), (6.50623885, -10.616265761), (6.506198111, -10.615898568), (6.506156929, -10.615527789), (6.506110303, -10.615107635), (6.506068107, -10.614727232), (6.506031797, -10.614400204), (6.505988866, -10.614013504), (6.505942043, -10.613591427), (6.505905665, -10.613263787), (6.505861429, -10.612865173), (6.505820089, -10.612492699), (6.505443943, -10.609103597), (6.505109591, -10.606091061), (6.504775239, -10.603078526), (6.504440888, -10.600065991), (6.504106536, -10.597053456), (6.503772184, -10.59404092), (6.503437833, -10.591028385), (6.503103481, -10.588015849), (6.502769129, -10.585003314), (6.502434777, -10.581990779), (6.502100426, -10.578978244), (6.501766074, -10.575965708), (6.501431722, -10.572953173), (6.501018987, -10.569234395), (6.500940603, -10.568528153), (6.50086222, -10.567821911), (6.500783836, -10.567115668), (6.500705452, -10.566409426), (6.500627069, -10.565703184), (6.500548685, -10.564996941), (6.500470302, -10.564290699), (6.500391918, -10.563584457), (6.500313534, -10.562878215), (6.500235151, -10.562171972), (6.500156767, -10.56146573), (6.500078384, -10.560759488), (6.5, -10.560053245)],
                knots=[0.64269819, 0.64269819, 0.64269819, 0.64269819, 0.64269819, 0.64269819, 0.64269819, 0.64269819, 0.64269819, 0.64269819, 0.64269819, 0.64269819, 0.64269819, 0.64269819, 0.64269819, 0.723475835, 0.723475835, 0.723475835, 0.723475835, 0.723475835, 0.723475835, 0.723475835, 0.723475835, 0.723475835, 0.723475835, 0.723475835, 0.723475835, 0.723475835, 0.746827792, 0.746827792, 0.746827792, 0.746827792, 0.746827792, 0.746827792, 0.746827792, 0.746827792, 0.746827792, 0.746827792, 0.746827792, 0.746827792, 0.746827792, 0.752665781, 0.752665781, 0.752665781, 0.752665781, 0.752665781, 0.752665781, 0.752665781, 0.752665781, 0.752665781, 0.752665781, 0.752665781, 0.752665781, 0.752665781, 0.755584776, 0.755584776, 0.755584776, 0.755584776, 0.755584776, 0.755584776, 0.755584776, 0.755584776, 0.755584776, 0.755584776, 0.755584776, 0.755584776, 0.755584776, 0.75850377, 0.75850377, 0.75850377, 0.75850377, 0.75850377, 0.75850377, 0.75850377, 0.75850377, 0.75850377, 0.75850377, 0.75850377, 0.75850377, 0.75850377, 0.770179749, 0.770179749, 0.770179749, 0.770179749, 0.770179749, 0.770179749, 0.770179749, 0.770179749, 0.770179749, 0.770179749, 0.770179749, 0.770179749, 0.770179749, 0.816883663, 0.816883663, 0.816883663, 0.816883663, 0.816883663, 0.816883663, 0.816883663, 0.816883663, 0.816883663, 0.816883663, 0.816883663, 0.816883663, 0.816883663, 0.910291491, 0.910291491, 0.910291491, 0.910291491, 0.910291491, 0.910291491, 0.910291491, 0.910291491, 0.910291491, 0.910291491, 0.910291491, 0.910291491, 0.910291491, 0.956995406, 0.956995406, 0.956995406, 0.956995406, 0.956995406, 0.956995406, 0.956995406, 0.956995406, 0.956995406, 0.956995406, 0.956995406, 0.956995406, 0.956995406, 0.980347363, 0.980347363, 0.980347363, 0.980347363, 0.980347363, 0.980347363, 0.980347363, 0.980347363, 0.980347363, 0.980347363, 0.980347363, 0.980347363, 0.980347363, 0.992023341, 0.992023341, 0.992023341, 0.992023341, 0.992023341, 0.992023341, 0.992023341, 0.992023341, 0.992023341, 0.992023341, 0.992023341, 0.992023341, 0.992023341, 0.997861331, 0.997861331, 0.997861331, 0.997861331, 0.997861331, 0.997861331, 0.997861331, 0.997861331, 0.997861331, 0.997861331, 0.997861331, 0.997861331, 0.997861331, 0.999320828, 0.999320828, 0.999320828, 0.999320828, 0.999320828, 0.999320828, 0.999320828, 0.999320828, 0.999320828, 0.999320828, 0.999320828, 0.999320828, 0.999320828, 0.999685702, 0.999685702, 0.999685702, 0.999685702, 0.999685702, 0.999685702, 0.999685702, 0.999685702, 0.999685702, 0.999685702, 0.999685702, 0.999685702, 0.999685702, 0.999868139, 0.999868139, 0.999868139, 0.999868139, 0.999868139, 0.999868139, 0.999868139, 0.999868139, 0.999868139, 0.999868139, 0.999868139, 0.999868139, 0.999868139, 0.999959358, 0.999959358, 0.999959358, 0.999959358, 0.999959358, 0.999959358, 0.999959358, 0.999959358, 0.999959358, 0.999959358, 0.999959358, 0.999959358, 0.999959358, 1.000050577, 1.000050577, 1.000050577, 1.000050577, 1.000050577, 1.000050577, 1.000050577, 1.000050577, 1.000050577, 1.000050577, 1.000050577, 1.000050577, 1.000050577, 1.000780325, 1.000780325, 1.000780325, 1.000780325, 1.000780325, 1.000780325, 1.000780325, 1.000780325, 1.000780325, 1.000780325, 1.000780325, 1.000780325, 1.000780325, 1.000951404, 1.000951404, 1.000951404, 1.000951404, 1.000951404, 1.000951404, 1.000951404, 1.000951404, 1.000951404, 1.000951404, 1.000951404, 1.000951404, 1.000951404, 1.000951404, 1.000951404], degree=14))
            Line((6.5, -10.560053245), (6.5, 0))
            ThreePointArc((6.5, 0), (0, 6.5), (-6.5, 0))
            Line((-6.5, 0), (-6.500000009, -17.261239946))
        make_face()
    extrude(amount=SHELL_1_DEPTH, mode=Mode.SUBTRACT)

    # 草图2 → 切除-拉伸1 (cut)
    with BuildSketch(Plane(origin=(0, 0, 0), x_dir=(-1, 0, 0), z_dir=(0, 0, -1))):
        Circle(SKETCH_2_R)
    extrude(amount=-CUT_EXTRUDE_1_DEPTH, mode=Mode.SUBTRACT)


solid = part.part
